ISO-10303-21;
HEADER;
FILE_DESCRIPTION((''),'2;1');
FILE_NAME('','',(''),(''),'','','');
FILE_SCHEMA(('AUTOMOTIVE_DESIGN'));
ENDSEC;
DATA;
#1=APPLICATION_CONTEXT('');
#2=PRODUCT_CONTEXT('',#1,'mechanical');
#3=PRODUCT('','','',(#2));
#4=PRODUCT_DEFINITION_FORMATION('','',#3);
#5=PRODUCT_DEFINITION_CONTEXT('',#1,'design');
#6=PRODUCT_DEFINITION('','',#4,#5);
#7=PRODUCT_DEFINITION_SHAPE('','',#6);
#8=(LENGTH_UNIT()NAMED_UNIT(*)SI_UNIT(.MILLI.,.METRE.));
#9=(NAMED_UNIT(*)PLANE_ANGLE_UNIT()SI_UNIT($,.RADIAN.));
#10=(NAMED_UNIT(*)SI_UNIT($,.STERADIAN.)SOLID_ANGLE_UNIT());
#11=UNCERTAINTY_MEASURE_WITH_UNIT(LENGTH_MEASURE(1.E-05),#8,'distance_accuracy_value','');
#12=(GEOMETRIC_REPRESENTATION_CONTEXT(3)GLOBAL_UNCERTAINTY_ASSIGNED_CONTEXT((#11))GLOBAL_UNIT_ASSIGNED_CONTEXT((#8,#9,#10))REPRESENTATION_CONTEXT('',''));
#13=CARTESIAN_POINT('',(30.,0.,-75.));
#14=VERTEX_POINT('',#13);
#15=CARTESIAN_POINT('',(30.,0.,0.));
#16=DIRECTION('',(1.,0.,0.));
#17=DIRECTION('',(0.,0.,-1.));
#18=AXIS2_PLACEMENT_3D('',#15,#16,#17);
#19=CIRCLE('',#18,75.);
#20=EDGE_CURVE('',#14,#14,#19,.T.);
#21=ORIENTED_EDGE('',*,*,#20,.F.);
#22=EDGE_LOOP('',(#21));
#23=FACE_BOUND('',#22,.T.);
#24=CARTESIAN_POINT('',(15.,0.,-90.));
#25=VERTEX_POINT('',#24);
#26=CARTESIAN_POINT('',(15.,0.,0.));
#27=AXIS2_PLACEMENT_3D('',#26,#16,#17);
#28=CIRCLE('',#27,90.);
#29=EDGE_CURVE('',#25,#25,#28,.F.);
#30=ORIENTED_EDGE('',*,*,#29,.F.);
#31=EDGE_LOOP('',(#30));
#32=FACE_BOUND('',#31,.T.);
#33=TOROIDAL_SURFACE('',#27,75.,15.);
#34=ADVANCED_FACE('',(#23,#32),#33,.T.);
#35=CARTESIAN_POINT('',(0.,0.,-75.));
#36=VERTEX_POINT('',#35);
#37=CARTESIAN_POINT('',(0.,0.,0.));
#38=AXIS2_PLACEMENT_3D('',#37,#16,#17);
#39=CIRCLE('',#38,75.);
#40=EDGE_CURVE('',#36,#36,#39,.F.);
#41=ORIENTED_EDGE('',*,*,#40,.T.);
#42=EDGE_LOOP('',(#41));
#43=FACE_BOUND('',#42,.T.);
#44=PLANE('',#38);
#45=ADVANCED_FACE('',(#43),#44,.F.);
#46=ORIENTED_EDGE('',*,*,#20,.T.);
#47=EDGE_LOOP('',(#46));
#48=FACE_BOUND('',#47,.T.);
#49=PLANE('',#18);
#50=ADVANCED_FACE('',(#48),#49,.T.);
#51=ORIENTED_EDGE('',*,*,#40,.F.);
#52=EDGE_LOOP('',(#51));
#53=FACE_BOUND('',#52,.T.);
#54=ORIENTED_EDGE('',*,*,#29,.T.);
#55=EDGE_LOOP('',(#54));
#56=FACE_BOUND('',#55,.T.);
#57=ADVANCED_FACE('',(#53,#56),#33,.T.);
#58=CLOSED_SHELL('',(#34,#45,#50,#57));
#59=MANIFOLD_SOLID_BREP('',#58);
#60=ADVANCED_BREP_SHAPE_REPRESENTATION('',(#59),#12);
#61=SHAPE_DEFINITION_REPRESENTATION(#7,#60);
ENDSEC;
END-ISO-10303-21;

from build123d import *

# Parameters (mm, degrees)
SKETCH_1_R      = 90
EXTRUDE_1_DEPTH = 30
FILLET_1_R      = 15


with BuildPart() as part:
    # 草图1 → 凸台-拉伸1 (new body)
    with BuildSketch(Plane(origin=(0, 0, 0), x_dir=(0, 0, -1), z_dir=(1, 0, 0))):
        Circle(SKETCH_1_R)
    extrude(amount=EXTRUDE_1_DEPTH)

    # 圆角1
    fillet_1_edges = [part.edges().sort_by_distance(p)[0] for p in [
        (0, 0, 90),
        (30, 0, 90),
    ]]
    fillet(fillet_1_edges, radius=FILLET_1_R - 0.0001)  # a hair under: the kernel refuses the full size


solid = part.part
